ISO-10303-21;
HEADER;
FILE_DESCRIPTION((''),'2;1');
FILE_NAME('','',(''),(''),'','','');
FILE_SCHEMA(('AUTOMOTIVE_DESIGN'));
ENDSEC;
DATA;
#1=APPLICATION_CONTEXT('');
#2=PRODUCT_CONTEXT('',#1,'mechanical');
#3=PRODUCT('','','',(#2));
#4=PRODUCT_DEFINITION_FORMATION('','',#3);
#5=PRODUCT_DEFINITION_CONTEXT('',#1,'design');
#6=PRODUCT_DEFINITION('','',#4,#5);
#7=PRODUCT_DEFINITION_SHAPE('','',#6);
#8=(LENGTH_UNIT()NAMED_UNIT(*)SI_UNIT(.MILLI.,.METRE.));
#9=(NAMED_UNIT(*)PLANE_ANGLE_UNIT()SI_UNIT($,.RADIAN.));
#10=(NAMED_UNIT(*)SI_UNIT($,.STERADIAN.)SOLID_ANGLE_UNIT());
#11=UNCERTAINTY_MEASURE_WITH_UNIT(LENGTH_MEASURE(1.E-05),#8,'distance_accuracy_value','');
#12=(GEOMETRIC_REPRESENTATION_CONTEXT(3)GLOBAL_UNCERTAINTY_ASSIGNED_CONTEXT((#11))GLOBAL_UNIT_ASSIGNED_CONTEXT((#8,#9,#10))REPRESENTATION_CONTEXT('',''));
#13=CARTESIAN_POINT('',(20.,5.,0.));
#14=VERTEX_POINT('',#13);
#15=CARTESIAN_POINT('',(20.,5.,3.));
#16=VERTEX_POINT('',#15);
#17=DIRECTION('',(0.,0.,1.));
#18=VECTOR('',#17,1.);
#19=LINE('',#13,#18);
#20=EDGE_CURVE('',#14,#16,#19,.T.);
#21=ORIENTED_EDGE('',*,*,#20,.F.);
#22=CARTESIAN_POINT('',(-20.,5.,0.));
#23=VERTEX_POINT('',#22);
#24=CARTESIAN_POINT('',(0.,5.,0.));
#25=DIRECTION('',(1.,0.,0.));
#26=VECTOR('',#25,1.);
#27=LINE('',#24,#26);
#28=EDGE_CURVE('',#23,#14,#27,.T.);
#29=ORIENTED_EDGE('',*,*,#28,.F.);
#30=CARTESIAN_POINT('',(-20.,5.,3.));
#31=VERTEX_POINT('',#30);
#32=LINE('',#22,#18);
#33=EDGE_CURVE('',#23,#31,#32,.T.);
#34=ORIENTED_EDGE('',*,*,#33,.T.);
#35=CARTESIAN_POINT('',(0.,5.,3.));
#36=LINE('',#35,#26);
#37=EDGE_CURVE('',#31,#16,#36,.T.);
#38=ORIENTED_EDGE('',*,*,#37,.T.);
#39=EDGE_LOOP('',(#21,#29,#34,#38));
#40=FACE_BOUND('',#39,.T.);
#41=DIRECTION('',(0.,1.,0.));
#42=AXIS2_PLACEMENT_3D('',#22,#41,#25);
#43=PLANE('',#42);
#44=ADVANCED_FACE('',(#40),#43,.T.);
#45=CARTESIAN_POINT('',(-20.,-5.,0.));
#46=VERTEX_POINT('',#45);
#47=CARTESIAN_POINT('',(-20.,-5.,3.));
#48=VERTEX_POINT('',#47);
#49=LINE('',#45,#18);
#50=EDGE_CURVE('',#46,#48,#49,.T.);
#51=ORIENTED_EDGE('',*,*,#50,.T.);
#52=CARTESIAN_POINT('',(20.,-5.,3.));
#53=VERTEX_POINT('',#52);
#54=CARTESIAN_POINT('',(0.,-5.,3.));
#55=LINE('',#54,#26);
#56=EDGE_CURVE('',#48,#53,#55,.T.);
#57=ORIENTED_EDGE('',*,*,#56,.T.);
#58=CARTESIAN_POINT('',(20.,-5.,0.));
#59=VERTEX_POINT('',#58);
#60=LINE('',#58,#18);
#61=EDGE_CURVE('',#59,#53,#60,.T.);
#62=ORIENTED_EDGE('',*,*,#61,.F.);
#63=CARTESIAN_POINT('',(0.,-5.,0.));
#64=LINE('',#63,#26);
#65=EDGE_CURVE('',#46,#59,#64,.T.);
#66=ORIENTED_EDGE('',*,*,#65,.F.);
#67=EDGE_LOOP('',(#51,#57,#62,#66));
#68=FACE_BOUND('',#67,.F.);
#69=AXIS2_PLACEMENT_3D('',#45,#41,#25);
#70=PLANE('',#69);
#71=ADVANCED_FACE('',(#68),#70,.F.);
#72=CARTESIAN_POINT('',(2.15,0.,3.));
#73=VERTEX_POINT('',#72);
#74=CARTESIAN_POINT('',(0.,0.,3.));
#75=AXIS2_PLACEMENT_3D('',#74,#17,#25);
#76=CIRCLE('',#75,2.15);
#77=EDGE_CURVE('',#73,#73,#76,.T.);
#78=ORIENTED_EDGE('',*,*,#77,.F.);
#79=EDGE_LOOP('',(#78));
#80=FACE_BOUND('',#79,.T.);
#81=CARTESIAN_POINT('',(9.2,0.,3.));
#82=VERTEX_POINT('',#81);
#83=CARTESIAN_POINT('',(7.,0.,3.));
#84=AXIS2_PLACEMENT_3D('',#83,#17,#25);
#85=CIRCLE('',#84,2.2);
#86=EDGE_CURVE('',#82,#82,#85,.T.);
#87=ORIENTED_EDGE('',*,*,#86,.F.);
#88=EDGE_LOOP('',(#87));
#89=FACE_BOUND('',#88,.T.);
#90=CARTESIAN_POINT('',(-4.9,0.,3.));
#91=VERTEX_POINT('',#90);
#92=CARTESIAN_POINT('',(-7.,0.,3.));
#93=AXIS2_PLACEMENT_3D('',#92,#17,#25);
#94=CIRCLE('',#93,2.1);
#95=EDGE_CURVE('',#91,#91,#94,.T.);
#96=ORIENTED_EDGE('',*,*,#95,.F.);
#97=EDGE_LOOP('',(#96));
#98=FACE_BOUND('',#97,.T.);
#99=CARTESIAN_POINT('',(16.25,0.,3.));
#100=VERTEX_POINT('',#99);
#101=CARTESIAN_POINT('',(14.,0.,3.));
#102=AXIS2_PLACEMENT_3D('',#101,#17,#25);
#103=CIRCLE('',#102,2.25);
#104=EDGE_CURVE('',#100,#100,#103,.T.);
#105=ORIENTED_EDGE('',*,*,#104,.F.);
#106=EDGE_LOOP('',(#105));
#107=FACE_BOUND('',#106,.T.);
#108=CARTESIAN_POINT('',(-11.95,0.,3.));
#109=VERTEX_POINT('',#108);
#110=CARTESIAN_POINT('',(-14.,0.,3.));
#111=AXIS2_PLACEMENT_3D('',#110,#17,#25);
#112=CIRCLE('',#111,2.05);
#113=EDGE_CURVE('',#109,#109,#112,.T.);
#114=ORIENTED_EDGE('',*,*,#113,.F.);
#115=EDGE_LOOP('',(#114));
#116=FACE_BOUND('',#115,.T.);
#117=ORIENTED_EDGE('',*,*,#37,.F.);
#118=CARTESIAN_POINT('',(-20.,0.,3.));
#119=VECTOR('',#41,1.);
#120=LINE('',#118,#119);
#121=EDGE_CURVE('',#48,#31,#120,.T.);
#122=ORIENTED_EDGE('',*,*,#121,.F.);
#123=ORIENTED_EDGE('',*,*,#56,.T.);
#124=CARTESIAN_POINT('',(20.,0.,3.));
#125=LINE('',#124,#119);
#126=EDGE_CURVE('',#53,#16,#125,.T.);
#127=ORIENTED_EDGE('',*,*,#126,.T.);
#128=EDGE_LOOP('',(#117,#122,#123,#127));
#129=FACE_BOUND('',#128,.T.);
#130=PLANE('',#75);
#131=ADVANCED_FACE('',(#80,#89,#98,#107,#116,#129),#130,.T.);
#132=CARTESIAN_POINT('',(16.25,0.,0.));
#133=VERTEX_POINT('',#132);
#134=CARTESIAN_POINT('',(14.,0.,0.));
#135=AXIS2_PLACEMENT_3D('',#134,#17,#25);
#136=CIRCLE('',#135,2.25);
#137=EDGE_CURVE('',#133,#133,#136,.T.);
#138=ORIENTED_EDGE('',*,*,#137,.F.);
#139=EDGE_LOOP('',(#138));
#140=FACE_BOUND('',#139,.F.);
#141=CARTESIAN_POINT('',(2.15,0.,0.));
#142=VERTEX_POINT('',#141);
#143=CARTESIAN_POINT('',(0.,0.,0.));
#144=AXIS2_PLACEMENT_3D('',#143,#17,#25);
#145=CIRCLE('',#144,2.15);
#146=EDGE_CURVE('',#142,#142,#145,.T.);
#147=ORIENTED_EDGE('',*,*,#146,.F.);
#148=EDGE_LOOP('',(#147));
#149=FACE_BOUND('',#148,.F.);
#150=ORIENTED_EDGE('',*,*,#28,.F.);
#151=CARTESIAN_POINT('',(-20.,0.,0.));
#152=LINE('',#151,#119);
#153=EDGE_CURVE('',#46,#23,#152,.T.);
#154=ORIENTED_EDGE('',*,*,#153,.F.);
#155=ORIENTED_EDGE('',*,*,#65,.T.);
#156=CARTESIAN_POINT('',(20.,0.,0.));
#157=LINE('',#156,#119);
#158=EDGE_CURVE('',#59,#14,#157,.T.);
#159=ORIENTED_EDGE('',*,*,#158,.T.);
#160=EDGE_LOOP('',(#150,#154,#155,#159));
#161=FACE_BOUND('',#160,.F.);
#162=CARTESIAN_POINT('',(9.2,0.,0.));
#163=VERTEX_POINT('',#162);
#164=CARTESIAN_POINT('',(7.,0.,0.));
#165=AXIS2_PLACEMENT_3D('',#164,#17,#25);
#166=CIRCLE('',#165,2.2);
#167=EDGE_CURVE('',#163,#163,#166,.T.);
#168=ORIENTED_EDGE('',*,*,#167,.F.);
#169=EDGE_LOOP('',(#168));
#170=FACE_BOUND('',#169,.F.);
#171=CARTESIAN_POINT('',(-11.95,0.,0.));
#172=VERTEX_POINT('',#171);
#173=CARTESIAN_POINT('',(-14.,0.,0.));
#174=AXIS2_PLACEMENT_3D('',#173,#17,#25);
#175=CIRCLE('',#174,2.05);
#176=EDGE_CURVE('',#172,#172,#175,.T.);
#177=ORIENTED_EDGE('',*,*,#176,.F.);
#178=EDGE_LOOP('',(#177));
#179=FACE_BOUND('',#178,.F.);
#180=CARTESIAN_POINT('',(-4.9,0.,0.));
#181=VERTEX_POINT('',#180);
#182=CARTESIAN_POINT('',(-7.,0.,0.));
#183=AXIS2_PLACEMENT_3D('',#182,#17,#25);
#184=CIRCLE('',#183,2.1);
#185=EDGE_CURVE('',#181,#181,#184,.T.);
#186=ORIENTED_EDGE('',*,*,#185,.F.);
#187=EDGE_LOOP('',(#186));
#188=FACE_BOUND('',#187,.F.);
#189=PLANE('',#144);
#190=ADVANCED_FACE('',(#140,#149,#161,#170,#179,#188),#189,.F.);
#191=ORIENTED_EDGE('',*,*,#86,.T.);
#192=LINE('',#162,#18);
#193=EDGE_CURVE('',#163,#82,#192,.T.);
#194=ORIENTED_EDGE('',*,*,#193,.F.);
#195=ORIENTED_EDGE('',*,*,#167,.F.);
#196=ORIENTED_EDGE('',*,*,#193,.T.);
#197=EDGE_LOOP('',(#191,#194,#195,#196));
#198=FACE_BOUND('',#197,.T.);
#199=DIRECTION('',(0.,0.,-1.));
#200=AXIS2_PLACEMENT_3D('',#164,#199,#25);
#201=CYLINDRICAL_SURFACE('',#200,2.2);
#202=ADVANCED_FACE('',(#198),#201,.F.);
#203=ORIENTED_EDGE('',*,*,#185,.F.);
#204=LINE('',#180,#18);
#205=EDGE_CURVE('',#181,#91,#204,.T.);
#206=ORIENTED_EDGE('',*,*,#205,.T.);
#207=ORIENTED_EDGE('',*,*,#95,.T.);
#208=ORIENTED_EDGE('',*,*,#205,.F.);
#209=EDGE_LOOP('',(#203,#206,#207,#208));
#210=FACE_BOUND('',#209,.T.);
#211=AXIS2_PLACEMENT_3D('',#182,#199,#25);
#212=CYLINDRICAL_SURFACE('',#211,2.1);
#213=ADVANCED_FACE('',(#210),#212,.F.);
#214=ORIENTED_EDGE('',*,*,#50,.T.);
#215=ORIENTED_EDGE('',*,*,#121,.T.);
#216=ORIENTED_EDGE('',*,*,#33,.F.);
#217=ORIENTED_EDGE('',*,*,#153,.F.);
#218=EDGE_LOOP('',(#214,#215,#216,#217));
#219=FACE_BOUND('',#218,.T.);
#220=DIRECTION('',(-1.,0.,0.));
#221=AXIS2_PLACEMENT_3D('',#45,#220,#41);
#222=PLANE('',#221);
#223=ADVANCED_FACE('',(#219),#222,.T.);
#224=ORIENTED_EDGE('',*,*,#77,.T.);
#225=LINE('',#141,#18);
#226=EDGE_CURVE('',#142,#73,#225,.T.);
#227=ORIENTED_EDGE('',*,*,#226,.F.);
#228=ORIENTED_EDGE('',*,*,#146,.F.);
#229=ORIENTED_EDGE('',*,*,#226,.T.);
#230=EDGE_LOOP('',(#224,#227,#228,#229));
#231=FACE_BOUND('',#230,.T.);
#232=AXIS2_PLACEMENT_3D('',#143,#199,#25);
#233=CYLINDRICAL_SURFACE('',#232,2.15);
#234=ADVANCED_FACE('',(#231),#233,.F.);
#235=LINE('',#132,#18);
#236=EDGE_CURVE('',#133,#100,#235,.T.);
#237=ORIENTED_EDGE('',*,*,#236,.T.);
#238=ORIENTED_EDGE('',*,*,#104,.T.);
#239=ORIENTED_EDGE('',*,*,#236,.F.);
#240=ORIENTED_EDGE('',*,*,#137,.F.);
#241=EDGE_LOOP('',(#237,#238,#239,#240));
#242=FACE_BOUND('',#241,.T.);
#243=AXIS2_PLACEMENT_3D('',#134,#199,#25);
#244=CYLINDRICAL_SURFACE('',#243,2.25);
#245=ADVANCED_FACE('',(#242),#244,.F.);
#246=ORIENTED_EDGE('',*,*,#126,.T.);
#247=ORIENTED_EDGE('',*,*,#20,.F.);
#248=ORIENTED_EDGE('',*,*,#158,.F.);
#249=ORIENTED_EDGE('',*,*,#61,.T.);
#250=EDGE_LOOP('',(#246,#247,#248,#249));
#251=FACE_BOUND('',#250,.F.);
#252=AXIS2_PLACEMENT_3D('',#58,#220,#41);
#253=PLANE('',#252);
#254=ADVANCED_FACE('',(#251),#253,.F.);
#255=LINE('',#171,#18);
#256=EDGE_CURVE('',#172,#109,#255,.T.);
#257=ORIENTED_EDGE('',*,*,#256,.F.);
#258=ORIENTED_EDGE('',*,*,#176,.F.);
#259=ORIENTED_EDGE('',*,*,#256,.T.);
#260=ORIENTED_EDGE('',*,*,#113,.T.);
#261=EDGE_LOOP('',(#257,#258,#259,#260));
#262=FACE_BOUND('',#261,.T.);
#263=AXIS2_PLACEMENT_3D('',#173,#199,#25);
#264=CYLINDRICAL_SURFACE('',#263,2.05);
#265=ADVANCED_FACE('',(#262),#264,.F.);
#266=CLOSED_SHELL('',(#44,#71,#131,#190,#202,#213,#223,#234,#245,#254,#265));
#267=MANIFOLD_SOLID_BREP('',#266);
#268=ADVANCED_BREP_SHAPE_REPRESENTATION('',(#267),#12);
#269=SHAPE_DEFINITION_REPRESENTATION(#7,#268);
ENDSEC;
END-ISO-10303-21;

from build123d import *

# Parameters (mm, degrees)
F0_W     = 40
F0_H     = 10
F0_R     = 2.05
F0_R_2   = 2.1
F0_R_3   = 2.15
F0_R_4   = 2.2
F0_R_5   = 2.25
F1_DEPTH = 3


# Not quite as in the source:
# - a feature of the source that left no trace in its solid (it failed there, or was rolled back) is left out


with BuildPart() as f1:
    # F0 (on Top) → F1 (new body)
    with BuildSketch(Plane.XY):
        Rectangle(F0_W, F0_H)
        with Locations((-14, 0)):
            Circle(F0_R, mode=Mode.SUBTRACT)
        with Locations((-7, 0)):
            Circle(F0_R_2, mode=Mode.SUBTRACT)
        Circle(F0_R_3, mode=Mode.SUBTRACT)
        with Locations((7, 0)):
            Circle(F0_R_4, mode=Mode.SUBTRACT)
        with Locations((14, 0)):
            Circle(F0_R_5, mode=Mode.SUBTRACT)
    extrude(amount=F1_DEPTH)


solid = f1.part
